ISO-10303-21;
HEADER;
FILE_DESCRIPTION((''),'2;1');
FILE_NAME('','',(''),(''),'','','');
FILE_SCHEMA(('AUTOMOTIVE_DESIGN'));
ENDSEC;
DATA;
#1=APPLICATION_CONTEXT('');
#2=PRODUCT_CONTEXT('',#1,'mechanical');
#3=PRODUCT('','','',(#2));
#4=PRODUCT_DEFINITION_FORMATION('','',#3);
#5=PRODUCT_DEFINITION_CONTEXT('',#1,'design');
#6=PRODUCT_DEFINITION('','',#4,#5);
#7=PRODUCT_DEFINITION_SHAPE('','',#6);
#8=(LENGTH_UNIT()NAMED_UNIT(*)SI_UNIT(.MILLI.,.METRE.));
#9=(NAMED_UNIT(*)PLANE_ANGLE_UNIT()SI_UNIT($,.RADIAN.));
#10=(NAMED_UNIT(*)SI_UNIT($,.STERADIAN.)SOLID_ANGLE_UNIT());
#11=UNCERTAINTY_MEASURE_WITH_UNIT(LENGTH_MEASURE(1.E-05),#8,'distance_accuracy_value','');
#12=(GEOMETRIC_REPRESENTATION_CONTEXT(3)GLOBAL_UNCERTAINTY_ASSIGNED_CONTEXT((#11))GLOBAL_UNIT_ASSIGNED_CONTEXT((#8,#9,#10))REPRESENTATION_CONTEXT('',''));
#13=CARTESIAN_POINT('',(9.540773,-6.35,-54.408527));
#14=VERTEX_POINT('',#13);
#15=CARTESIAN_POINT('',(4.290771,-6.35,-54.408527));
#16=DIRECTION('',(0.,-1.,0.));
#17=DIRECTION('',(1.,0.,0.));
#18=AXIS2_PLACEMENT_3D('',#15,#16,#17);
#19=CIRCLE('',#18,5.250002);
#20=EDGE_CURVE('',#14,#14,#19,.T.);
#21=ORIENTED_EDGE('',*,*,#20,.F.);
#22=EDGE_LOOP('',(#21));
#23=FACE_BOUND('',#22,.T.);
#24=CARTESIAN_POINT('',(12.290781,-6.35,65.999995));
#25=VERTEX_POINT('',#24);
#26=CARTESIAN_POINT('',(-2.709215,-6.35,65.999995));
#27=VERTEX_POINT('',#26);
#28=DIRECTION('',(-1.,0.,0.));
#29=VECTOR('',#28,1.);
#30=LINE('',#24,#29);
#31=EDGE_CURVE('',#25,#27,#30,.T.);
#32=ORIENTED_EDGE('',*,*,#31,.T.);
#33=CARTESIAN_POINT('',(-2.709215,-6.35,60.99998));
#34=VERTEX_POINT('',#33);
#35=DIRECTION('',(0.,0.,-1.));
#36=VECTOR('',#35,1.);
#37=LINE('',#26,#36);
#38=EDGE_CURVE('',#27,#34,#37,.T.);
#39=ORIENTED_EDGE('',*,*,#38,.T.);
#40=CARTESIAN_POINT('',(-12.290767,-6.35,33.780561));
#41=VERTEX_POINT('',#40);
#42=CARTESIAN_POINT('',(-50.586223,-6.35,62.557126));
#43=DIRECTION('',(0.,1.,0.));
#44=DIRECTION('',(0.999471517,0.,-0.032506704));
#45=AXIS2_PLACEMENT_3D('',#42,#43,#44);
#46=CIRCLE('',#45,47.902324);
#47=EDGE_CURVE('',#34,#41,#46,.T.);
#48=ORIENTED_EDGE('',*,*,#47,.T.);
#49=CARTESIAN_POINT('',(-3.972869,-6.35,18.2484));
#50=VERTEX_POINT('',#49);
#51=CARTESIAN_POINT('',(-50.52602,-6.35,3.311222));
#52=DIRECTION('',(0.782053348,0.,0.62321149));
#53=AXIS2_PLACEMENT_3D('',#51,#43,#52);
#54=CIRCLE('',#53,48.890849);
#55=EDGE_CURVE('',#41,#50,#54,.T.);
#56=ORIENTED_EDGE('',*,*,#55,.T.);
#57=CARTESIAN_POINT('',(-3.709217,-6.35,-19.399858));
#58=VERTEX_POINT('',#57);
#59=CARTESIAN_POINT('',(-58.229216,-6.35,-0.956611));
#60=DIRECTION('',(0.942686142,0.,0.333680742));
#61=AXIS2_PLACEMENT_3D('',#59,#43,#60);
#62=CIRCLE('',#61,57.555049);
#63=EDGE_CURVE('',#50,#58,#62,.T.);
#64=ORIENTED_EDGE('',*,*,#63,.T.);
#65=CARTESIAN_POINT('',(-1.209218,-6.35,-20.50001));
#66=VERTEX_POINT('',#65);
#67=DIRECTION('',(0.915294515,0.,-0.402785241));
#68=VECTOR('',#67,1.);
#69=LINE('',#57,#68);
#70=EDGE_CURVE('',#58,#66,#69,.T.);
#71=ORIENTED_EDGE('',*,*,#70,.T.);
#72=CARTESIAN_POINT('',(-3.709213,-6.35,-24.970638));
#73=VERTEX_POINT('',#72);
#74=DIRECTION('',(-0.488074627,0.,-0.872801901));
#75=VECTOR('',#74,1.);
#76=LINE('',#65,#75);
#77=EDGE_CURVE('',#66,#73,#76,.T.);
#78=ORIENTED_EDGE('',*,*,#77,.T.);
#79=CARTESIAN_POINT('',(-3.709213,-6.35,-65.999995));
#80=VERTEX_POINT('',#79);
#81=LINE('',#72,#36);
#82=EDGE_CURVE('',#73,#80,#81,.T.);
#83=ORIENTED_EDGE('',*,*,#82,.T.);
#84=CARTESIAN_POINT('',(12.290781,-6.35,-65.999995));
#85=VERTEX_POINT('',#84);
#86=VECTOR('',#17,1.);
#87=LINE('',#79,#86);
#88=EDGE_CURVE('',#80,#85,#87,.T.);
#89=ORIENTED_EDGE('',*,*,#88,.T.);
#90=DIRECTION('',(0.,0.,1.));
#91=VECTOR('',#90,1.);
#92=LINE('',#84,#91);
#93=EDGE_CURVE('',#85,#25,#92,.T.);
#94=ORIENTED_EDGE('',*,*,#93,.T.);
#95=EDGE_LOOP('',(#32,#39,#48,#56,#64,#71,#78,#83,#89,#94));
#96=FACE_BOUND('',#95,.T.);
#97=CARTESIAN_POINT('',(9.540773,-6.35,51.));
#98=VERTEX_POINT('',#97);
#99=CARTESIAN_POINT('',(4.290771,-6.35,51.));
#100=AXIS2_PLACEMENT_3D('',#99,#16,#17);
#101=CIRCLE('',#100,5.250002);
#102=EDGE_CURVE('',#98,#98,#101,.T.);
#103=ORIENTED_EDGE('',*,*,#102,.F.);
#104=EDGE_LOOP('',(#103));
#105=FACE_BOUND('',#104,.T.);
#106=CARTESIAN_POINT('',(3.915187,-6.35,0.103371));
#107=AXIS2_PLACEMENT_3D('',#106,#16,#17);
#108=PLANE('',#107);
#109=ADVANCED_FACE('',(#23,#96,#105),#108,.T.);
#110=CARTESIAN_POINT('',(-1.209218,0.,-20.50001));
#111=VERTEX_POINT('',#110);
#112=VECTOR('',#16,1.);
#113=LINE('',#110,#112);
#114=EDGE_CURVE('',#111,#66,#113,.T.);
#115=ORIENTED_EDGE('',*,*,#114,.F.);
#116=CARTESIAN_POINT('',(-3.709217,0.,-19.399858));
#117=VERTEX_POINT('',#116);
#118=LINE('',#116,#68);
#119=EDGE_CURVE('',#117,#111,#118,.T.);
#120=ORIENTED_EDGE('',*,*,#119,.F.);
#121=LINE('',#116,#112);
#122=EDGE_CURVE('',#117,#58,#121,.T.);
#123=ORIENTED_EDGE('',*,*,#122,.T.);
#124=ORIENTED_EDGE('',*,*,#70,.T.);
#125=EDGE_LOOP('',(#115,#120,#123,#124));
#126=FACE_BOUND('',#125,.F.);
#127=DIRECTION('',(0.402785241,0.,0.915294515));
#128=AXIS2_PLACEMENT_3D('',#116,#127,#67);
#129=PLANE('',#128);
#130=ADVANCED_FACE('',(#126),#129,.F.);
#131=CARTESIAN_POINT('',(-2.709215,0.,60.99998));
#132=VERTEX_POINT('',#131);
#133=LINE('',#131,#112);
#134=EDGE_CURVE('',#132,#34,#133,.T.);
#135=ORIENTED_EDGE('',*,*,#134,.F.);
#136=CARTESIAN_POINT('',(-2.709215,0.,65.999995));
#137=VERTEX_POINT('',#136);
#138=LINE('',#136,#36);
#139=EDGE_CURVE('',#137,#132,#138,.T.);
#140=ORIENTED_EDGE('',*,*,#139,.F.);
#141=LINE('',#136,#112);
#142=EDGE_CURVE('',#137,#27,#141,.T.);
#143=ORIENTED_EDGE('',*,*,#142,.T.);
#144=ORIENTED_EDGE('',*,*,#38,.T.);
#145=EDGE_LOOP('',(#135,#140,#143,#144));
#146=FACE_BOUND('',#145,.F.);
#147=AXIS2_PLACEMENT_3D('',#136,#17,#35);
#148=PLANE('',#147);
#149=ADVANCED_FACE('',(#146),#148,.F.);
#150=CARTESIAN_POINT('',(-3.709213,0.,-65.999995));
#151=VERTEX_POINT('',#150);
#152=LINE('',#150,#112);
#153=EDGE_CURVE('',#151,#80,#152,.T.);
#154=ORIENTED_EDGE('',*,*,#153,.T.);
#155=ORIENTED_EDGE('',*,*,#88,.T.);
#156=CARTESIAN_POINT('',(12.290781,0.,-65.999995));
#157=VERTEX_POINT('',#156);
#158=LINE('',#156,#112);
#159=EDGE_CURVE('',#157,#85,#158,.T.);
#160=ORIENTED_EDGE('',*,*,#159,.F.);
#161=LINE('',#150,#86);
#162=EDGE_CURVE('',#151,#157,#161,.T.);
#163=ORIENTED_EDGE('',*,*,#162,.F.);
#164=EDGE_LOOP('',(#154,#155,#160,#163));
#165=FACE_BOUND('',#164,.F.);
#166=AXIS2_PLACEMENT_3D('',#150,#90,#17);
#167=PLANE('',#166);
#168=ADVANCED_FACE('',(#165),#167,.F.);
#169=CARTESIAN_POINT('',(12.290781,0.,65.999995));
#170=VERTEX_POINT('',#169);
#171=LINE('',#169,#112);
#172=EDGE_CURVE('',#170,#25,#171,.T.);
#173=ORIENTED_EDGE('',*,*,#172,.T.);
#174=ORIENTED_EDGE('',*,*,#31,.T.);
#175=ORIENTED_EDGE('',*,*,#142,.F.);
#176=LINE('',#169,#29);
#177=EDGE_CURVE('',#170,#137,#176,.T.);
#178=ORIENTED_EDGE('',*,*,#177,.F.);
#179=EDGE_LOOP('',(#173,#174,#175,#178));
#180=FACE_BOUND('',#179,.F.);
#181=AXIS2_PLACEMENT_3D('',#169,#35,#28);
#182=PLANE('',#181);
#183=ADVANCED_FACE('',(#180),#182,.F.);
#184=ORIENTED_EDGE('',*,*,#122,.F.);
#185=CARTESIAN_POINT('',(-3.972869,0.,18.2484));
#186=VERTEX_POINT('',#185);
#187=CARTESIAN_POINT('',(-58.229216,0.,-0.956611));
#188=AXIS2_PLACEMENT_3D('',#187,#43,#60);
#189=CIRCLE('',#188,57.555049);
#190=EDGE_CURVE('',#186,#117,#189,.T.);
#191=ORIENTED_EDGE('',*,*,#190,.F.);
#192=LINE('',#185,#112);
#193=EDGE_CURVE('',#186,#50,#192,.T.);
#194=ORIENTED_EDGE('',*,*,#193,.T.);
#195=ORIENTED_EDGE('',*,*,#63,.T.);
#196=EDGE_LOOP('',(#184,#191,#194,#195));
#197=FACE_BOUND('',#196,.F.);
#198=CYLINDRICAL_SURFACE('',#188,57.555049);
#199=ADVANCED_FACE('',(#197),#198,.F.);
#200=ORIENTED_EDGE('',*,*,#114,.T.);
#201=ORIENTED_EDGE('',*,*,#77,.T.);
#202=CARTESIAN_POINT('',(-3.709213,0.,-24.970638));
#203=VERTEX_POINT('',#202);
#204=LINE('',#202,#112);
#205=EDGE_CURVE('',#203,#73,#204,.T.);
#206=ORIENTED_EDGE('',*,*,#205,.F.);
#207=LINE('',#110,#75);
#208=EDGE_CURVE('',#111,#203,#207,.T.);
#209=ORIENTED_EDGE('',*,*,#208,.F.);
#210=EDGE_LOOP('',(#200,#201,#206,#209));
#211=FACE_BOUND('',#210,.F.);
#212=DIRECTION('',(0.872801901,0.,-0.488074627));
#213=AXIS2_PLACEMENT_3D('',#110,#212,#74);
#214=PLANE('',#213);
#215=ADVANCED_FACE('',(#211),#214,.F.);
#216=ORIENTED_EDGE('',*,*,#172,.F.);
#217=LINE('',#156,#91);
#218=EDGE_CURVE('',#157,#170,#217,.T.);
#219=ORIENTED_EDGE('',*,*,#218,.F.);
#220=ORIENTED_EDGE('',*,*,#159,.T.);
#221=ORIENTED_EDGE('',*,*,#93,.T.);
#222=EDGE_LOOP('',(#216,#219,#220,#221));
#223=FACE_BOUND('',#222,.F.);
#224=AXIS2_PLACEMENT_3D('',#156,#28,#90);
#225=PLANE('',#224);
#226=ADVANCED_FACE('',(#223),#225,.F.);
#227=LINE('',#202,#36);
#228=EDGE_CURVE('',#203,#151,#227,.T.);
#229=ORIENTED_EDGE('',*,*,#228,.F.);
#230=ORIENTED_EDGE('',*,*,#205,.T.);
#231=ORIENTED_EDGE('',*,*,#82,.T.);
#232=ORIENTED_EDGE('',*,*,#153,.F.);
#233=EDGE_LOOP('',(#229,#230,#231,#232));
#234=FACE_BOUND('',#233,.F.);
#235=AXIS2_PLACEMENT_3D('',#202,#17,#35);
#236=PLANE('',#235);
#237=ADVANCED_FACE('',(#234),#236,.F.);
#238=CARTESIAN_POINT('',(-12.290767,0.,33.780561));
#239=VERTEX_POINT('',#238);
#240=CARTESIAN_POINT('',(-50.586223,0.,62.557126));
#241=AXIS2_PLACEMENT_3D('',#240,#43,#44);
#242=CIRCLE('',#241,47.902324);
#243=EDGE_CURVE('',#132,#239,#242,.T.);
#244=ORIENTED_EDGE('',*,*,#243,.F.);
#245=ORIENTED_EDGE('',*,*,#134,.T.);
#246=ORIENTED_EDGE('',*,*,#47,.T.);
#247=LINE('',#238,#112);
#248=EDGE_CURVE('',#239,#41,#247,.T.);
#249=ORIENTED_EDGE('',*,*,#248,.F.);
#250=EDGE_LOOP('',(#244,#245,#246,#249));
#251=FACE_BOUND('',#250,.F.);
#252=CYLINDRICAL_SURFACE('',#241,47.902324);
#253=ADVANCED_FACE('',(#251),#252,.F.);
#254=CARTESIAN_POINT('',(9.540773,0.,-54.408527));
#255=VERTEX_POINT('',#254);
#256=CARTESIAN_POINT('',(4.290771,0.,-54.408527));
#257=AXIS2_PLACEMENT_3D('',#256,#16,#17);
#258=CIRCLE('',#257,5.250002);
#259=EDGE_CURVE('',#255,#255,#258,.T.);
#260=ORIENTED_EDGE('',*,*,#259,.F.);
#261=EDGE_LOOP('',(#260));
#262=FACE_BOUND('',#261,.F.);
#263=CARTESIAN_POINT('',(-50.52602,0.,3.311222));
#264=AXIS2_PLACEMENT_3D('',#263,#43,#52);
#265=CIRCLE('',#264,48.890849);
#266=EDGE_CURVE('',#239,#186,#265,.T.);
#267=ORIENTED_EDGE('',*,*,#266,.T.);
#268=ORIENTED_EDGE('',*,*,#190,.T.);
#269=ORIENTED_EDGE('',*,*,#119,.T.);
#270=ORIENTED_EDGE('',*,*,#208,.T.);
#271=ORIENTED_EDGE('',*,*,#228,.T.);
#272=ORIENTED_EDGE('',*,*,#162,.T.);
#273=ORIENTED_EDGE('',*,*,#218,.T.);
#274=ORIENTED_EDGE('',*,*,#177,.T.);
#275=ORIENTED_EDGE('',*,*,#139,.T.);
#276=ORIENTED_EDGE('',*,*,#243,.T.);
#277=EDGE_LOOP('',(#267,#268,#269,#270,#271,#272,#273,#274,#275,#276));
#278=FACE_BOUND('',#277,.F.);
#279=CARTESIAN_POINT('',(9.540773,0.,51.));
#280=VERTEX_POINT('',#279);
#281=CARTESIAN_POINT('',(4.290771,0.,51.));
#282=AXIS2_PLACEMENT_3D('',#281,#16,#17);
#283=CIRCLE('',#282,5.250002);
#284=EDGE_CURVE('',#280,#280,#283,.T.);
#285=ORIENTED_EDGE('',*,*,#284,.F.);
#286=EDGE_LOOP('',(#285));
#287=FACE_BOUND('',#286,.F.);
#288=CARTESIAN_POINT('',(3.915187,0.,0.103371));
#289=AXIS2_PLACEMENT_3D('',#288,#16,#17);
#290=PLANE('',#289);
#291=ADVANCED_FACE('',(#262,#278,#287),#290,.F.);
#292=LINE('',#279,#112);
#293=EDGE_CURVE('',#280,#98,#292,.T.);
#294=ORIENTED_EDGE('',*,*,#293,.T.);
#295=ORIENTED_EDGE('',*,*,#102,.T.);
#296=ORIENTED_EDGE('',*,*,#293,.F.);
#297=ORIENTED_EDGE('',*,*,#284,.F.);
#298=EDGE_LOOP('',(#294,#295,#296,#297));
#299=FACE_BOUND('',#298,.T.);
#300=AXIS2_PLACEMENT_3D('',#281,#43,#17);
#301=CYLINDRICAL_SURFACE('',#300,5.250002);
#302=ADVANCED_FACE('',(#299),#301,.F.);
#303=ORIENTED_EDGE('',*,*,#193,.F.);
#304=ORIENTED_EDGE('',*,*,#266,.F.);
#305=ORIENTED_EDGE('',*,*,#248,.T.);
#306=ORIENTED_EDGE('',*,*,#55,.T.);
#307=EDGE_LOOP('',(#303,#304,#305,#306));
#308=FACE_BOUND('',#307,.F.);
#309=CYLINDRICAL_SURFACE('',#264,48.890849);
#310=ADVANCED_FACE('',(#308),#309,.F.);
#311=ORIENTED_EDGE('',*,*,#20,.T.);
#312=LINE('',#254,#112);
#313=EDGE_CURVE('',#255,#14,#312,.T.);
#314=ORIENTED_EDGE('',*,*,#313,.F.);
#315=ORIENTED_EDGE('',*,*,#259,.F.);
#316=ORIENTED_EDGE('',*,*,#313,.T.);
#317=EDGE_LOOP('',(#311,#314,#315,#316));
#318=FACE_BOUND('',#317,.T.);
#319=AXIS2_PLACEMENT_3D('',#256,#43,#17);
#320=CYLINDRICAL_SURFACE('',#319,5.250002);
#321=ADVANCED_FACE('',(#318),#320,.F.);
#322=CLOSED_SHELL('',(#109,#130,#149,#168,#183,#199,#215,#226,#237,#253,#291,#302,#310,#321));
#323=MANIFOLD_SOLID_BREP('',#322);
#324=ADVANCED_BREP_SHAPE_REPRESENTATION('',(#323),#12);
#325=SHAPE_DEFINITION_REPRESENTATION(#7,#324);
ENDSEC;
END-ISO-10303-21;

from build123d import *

# Parameters (mm, degrees)
F0_R     = 5.2500022
F1_DEPTH = 6.35


# Not quite as in the source:
# - ends of sketch curves that miss each other by under 0.0002 mm in the source are joined


with BuildPart() as f1:
    # F0 (on Front) → F1 (new body)
    with BuildSketch(Plane.XZ):
        with BuildLine():
            Line((-2.7092148, 65.999995), (-2.7092148, 60.9999796))
            ThreePointArc((-2.7092148, 60.9999796), (-5.4016290161, 46.6516213468), (-12.2907672961, 33.7805612895))
            ThreePointArc((-12.2907672961, 33.7805612895), (-7.426360466, 26.392264731), (-3.9728687393, 18.248400136))
            ThreePointArc((-3.9728687393, 18.248400136), (-0.6755780926, -0.5535614771), (-3.7092166309, -19.3998583041))
            Line((-3.7092166309, -19.3998583041), (-1.2092178, -20.5000098))
            Line((-1.2092178, -20.5000098), (-3.7092128, -24.9706384))
            Line((-3.7092128, -24.9706384), (-3.7092128, -65.999995))
            Line((-3.7092128, -65.999995), (12.2907806, -65.999995))
            Line((12.2907806, -65.999995), (12.2907806, 65.999995))
            Line((12.2907806, 65.999995), (-2.7092148, 65.999995))
        make_face()
        with Locations((4.2907712, -54.4085272)):
            Circle(F0_R, mode=Mode.SUBTRACT)
        with Locations((4.2907712, 50.9999996)):
            Circle(F0_R, mode=Mode.SUBTRACT)
    extrude(amount=F1_DEPTH)


solid = f1.part
